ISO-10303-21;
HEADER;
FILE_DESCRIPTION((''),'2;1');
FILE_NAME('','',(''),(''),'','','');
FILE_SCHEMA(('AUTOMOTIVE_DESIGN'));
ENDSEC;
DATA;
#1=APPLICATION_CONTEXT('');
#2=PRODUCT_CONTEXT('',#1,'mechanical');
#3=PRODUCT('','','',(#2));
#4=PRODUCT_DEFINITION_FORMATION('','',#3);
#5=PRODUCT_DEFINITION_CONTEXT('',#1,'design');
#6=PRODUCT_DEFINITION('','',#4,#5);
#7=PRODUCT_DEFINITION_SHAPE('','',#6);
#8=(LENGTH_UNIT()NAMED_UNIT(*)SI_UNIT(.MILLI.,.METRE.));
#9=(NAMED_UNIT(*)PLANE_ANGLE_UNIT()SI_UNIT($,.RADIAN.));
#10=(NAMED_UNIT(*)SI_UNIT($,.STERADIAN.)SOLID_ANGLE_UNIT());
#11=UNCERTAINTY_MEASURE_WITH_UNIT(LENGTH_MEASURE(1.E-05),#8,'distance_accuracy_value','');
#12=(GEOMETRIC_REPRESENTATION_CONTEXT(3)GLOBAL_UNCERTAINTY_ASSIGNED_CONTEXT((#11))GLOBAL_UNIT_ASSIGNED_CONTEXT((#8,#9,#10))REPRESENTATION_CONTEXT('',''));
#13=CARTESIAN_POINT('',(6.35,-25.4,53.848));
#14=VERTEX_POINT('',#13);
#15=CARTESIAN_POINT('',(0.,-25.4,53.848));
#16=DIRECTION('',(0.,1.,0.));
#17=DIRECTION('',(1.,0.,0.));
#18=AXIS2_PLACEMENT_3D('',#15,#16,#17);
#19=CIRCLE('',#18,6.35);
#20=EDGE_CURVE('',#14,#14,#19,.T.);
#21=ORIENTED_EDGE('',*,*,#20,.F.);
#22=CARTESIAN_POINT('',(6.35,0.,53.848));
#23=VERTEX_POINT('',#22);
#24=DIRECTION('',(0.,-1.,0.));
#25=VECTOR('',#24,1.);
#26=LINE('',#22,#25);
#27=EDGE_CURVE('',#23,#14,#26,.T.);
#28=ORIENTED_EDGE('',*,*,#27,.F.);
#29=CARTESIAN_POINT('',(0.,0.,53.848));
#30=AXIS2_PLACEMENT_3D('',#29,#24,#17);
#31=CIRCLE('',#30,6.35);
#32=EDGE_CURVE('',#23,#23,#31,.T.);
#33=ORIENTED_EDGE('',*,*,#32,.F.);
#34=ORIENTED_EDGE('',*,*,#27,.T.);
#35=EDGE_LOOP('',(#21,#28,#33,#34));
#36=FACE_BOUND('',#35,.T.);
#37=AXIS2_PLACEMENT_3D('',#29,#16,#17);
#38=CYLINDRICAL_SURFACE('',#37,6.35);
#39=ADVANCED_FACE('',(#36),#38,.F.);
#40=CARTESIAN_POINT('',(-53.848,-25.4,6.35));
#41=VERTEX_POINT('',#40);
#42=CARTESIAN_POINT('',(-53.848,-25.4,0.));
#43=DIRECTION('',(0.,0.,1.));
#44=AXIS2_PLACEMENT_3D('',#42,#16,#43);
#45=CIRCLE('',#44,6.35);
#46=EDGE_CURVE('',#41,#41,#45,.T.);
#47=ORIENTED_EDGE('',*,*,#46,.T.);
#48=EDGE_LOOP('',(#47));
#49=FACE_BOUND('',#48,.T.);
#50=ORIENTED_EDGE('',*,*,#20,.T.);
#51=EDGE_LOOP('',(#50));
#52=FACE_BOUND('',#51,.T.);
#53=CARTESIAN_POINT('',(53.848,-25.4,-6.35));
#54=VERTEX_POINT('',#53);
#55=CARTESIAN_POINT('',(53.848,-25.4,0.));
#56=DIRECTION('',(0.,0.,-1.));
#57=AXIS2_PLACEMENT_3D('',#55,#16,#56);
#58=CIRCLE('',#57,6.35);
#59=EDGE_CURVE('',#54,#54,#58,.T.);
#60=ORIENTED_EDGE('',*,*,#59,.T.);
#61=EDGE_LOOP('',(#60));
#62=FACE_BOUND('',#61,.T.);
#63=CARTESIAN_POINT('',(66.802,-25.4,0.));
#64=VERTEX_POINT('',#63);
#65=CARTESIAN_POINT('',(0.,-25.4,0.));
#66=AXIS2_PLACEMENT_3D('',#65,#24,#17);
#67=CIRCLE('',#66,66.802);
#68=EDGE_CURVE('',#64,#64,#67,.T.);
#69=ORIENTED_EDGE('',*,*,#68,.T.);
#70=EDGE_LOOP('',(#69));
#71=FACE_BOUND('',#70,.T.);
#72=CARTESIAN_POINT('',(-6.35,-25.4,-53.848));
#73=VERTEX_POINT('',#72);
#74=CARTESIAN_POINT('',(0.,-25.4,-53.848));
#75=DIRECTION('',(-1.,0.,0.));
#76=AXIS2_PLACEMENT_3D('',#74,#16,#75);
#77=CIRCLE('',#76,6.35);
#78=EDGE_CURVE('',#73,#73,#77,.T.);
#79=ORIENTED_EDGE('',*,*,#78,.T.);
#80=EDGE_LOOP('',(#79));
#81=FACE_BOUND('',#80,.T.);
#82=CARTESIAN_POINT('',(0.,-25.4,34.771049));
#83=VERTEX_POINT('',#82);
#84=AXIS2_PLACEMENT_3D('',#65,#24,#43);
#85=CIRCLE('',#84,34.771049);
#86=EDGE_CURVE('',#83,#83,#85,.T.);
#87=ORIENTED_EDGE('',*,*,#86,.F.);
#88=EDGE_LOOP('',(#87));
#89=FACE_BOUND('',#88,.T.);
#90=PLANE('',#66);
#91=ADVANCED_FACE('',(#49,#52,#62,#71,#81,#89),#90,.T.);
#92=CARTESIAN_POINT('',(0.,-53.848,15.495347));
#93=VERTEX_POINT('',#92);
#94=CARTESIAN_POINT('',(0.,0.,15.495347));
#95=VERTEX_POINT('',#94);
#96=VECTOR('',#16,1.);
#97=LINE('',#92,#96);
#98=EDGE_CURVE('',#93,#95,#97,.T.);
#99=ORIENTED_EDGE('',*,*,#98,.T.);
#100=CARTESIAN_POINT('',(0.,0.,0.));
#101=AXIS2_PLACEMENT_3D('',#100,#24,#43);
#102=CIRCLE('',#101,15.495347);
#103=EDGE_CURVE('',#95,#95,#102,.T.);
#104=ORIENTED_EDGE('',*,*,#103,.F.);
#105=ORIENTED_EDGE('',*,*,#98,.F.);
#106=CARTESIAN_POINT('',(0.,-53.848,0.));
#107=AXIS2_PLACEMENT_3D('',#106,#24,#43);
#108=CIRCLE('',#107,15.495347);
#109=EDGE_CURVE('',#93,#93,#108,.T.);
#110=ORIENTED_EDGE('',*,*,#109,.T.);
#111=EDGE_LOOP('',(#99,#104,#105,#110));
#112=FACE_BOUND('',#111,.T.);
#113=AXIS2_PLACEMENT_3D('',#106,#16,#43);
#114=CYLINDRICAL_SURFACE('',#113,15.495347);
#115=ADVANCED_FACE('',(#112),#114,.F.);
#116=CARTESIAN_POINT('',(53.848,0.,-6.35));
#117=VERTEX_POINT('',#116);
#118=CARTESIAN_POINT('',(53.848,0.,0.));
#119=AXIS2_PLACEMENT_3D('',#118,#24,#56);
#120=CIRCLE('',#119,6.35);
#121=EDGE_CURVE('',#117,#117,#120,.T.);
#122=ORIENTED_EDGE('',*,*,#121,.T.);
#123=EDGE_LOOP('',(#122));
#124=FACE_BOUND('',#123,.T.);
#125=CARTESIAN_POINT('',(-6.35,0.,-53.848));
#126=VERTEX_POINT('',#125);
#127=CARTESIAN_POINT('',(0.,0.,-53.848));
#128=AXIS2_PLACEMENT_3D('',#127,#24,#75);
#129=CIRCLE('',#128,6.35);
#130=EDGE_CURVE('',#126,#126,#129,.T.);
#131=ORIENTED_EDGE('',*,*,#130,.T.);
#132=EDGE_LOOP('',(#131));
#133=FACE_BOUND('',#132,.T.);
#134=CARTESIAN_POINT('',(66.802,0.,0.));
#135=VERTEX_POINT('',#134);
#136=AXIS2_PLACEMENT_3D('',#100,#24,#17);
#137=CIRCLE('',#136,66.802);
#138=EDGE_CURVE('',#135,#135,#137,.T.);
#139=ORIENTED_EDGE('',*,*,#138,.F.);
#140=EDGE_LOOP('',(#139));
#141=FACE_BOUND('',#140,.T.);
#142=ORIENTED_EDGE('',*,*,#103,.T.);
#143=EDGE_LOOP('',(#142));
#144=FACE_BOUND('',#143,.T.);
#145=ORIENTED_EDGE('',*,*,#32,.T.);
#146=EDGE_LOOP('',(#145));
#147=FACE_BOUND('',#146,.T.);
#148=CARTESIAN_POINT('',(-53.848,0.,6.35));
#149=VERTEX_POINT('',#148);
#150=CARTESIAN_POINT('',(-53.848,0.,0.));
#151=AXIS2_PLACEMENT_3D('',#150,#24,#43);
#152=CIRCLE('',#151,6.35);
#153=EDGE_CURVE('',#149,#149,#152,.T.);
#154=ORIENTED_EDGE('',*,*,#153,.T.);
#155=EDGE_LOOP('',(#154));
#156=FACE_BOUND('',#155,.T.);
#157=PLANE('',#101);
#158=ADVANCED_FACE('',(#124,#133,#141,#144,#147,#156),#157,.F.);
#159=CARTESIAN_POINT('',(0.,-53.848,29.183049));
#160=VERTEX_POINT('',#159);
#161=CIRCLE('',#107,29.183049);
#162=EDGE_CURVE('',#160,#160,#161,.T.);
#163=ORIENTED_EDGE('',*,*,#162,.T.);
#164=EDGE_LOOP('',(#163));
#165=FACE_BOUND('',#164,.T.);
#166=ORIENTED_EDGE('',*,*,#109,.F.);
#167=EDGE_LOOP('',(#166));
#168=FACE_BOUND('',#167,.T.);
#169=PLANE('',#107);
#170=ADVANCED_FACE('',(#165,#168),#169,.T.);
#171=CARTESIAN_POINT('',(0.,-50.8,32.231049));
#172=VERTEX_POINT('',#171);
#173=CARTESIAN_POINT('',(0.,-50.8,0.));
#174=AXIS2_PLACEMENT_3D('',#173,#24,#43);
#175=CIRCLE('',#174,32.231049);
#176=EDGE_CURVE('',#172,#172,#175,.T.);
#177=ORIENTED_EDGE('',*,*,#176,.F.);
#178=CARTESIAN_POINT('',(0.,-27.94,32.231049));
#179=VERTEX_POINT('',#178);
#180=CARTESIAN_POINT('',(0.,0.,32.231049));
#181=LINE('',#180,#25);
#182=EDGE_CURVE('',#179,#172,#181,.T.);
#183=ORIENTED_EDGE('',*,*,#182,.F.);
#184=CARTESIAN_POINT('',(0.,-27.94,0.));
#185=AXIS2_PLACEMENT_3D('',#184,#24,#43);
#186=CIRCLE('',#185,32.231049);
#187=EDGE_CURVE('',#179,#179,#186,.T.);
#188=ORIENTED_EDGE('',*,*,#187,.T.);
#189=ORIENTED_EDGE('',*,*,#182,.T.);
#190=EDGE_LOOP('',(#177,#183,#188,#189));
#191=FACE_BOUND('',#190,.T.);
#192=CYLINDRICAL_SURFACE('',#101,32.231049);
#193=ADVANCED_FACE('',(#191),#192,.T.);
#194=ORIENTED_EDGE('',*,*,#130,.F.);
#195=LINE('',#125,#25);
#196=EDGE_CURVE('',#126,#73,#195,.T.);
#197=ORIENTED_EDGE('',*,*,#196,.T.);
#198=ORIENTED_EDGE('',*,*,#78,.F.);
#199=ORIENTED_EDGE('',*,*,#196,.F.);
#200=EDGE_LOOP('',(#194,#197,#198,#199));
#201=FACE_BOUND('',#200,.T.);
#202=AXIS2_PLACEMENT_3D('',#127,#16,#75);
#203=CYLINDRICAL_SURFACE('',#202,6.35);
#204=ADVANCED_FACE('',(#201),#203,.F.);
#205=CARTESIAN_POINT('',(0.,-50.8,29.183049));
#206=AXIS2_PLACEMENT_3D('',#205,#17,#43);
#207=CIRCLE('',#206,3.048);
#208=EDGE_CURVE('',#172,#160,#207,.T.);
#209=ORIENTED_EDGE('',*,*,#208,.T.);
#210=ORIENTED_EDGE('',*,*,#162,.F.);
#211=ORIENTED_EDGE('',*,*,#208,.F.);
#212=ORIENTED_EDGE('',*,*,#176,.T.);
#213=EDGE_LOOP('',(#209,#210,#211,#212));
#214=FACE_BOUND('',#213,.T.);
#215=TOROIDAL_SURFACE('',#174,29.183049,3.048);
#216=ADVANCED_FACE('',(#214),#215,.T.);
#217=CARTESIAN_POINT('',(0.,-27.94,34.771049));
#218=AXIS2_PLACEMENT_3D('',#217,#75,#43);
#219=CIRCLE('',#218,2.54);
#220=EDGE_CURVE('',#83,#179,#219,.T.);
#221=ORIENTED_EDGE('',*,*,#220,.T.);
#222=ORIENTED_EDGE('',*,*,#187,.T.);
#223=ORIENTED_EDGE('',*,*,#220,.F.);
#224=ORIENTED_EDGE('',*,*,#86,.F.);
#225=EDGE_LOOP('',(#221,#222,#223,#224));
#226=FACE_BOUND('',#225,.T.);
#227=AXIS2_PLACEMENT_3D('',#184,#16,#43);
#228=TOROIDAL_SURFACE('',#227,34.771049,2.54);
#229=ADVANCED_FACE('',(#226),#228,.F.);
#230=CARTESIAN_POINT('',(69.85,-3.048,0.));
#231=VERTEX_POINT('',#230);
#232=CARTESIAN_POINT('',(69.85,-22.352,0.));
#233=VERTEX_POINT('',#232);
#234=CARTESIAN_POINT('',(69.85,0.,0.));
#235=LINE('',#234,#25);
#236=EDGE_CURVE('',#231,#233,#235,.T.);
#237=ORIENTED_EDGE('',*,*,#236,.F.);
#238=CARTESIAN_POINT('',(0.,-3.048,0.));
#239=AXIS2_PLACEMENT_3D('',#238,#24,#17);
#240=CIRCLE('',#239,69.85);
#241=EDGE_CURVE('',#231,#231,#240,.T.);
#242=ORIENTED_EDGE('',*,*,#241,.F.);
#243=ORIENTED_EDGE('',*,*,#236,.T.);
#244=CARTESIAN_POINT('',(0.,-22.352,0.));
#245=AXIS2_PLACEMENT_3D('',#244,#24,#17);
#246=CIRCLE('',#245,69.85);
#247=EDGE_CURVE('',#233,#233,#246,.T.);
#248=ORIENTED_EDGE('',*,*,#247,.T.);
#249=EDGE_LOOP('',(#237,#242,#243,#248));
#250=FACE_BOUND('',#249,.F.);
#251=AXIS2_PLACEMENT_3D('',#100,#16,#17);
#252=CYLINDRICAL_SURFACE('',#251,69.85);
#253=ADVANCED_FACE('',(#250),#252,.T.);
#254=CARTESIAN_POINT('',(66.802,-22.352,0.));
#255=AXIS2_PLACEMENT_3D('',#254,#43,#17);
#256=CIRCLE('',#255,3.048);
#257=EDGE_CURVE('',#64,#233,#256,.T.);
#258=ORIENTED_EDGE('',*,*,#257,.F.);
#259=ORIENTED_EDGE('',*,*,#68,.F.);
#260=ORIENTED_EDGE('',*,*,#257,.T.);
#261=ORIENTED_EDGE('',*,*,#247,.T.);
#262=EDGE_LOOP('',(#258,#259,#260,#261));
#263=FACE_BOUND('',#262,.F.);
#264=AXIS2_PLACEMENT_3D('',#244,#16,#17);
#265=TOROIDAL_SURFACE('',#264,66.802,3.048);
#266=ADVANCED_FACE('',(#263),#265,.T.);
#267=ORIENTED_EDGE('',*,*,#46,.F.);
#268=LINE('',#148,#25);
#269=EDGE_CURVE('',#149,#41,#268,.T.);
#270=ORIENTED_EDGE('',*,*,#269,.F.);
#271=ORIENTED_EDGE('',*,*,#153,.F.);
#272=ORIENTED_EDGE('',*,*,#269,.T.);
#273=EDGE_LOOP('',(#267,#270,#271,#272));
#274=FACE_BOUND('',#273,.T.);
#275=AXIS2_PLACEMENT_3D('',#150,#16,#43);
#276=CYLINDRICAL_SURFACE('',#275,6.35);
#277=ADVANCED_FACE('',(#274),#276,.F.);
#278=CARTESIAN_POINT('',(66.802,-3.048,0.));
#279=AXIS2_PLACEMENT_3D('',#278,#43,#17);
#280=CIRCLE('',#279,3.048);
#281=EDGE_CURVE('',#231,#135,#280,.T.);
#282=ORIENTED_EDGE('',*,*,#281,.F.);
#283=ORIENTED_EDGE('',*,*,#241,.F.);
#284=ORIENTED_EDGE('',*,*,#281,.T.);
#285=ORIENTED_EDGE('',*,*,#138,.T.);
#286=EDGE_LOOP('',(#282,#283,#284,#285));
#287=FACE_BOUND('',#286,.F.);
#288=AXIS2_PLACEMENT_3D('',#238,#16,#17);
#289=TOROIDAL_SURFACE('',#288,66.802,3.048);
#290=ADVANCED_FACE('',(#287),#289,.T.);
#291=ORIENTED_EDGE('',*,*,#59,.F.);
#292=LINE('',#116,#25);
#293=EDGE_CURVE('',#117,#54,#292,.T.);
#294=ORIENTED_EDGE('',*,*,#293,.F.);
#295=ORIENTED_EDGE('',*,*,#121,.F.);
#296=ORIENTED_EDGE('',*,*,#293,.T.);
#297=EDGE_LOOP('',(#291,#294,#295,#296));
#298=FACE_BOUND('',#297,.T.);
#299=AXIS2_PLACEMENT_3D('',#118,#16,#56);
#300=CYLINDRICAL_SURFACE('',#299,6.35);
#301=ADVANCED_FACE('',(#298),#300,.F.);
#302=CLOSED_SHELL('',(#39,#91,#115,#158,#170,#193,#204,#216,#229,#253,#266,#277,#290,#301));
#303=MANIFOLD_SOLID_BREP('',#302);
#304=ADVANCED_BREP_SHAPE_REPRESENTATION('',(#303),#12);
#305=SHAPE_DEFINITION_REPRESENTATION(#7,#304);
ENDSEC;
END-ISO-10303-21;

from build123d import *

# Parameters (mm, degrees)
F0_R            = 69.85
F1_DEPTH        = 25.4
F2_R            = 19.05
F2_R_2          = 6.35
F3_DEPTH        = 25.401
F3_COPIES_COUNT = 4
F6_R            = 3.048
F7_R            = 3.048
F8_R            = 2.54


# Not quite as in the source:
# - a pattern or mirror of a feature is missing from the dataset's text; its kind, count and spacing are read off the source's solid


with BuildPart() as f1:
    # F0 (on Front) → F1 (new body)
    with BuildSketch(Plane.XZ):
        Circle(F0_R)
    extrude(amount=F1_DEPTH)

    # F2 (on Front) → F3 (cut, through all)
    with BuildSketch(Plane.XZ):
        Circle(F2_R)
        with Locations((0, 53.848)):
            Circle(F2_R_2)
    f3 = extrude(amount=F3_DEPTH, mode=Mode.SUBTRACT)

    # F3_copies: F3 ×4 about axis
    f3_copies_axis = Axis((0, 0, 0), (0, 1, 0))
    for i in range(1, F3_COPIES_COUNT):
        add(f3.rotate(f3_copies_axis, i * 360 / F3_COPIES_COUNT), mode=Mode.SUBTRACT)

    # F4 (on Right) → F5 (revolve)
    with BuildSketch(Plane.YZ):
        with BuildLine():
            Line((-53.848, 15.4953468409), (0, 15.4953468409))
            Line((0, 15.4953468409), (0, 32.2310491102))
            Line((0, 32.2310491102), (-25.3001134843, 32.2310491102))
            Line((-25.3001134843, 32.2310491102), (-50.8, 32.2310491102))
            ThreePointArc((-50.8, 32.2310491102), (-52.9552614691, 31.3383105793), (-53.848, 29.1830491102))
            Line((-53.848, 29.1830491102), (-53.848, 15.4953468409))
        make_face()
    revolve(axis=Axis((0, -22.6452342175, 0), (0, -1, 0)))

    # F6
    f6_edges = [f1.edges().sort_by_distance(p)[0] for p in [
        (-69.85, -25.4, 0),
    ]]
    fillet(f6_edges, radius=F6_R)

    # F7
    f7_edges = [f1.edges().sort_by_distance(p)[0] for p in [
        (-69.85, 0, 0),
    ]]
    fillet(f7_edges, radius=F7_R)

    # F8
    f8_edges = [f1.edges().sort_by_distance(p)[0] for p in [
        (0, -25.4, -32.231049),
    ]]
    fillet(f8_edges, radius=F8_R)


solid = f1.part
